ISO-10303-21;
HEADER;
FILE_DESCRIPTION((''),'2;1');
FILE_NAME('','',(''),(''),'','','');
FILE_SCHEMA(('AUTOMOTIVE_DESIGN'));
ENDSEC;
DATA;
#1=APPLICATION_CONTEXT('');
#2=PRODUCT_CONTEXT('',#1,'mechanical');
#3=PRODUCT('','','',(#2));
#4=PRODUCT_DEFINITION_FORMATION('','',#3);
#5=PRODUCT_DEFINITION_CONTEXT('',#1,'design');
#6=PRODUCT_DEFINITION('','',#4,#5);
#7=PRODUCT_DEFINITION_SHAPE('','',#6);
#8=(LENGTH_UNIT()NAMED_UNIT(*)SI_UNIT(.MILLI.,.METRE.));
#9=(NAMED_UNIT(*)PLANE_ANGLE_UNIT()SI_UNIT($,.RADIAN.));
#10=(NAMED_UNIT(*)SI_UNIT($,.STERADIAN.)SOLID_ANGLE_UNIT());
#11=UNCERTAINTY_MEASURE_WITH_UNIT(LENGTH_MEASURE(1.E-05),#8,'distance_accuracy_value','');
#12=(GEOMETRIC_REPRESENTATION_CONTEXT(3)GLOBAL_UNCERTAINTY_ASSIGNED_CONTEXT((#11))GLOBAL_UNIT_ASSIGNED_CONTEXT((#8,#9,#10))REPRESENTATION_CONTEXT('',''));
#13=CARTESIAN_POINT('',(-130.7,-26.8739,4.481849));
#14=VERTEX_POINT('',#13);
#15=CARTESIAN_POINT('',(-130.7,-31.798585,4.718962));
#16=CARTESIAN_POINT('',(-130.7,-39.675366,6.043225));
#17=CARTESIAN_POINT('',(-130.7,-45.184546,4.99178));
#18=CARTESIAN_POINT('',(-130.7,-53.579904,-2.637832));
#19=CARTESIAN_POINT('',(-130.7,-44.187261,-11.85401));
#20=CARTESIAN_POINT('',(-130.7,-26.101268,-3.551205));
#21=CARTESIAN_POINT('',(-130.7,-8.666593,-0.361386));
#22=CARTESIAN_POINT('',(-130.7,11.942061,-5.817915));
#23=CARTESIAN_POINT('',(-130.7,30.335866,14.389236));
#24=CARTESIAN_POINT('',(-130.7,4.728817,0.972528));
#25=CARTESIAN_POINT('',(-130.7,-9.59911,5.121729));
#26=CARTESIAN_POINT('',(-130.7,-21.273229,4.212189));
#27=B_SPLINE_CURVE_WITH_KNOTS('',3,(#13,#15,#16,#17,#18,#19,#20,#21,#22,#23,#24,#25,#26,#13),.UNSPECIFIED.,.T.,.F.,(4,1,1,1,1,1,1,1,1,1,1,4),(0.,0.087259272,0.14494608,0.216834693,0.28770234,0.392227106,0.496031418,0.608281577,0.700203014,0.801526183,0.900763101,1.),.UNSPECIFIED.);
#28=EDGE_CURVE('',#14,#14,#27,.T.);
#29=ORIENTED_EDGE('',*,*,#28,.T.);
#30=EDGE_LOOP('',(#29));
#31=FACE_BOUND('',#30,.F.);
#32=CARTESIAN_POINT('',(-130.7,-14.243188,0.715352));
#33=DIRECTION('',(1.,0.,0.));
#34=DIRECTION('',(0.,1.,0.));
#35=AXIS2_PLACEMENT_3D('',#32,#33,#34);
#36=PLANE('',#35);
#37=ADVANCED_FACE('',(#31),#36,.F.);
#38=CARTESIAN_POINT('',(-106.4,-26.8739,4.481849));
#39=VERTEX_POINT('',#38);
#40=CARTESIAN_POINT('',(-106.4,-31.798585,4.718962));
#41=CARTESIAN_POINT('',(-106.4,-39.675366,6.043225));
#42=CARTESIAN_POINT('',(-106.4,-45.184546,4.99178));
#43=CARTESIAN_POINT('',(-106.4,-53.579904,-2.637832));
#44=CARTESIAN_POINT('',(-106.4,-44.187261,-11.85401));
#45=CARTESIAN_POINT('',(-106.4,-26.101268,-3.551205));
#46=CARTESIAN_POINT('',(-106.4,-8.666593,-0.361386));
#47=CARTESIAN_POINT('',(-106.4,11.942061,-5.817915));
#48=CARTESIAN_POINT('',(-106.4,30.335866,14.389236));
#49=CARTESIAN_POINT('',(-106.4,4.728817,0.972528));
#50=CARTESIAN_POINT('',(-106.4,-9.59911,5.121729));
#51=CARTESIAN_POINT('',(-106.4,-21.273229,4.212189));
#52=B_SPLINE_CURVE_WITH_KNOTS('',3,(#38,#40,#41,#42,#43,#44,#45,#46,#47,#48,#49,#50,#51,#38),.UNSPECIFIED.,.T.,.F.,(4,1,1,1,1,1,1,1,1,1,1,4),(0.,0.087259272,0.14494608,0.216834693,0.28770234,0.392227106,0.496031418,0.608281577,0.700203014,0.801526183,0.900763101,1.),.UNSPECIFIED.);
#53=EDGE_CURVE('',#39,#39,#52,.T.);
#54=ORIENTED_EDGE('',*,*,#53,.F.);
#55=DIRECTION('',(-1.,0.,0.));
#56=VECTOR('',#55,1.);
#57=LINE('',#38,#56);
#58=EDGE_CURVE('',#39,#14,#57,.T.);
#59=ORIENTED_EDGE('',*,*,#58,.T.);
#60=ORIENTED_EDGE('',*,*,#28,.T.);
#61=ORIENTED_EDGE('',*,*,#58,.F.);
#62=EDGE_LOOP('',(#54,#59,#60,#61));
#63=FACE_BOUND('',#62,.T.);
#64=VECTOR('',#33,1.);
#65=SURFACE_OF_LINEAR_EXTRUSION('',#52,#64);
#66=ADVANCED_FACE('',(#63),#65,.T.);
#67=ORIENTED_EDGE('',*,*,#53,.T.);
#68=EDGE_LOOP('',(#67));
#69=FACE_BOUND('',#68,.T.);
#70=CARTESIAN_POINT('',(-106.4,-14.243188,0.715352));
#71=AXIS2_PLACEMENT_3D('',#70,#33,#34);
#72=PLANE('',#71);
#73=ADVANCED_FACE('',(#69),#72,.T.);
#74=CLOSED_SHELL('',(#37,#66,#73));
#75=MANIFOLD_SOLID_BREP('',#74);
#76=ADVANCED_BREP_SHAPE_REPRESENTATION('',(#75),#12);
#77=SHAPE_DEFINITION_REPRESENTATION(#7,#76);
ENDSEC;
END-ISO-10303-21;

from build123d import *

# Parameters (mm, degrees)
F4_DEPTH = 24.3


# Not quite as in the source:
# - the program builds the solid bodies; features that only make, move or delete a surface that nothing else refers to are left out


with BuildPart() as f4:
    # F3 (on offset) → F4 (new body)
    with BuildSketch(Plane.YZ.offset(-106.4)):
        with BuildLine():
            add(Edge.make_bspline(
                [(-26.8738996238, -33.3181507885), (-31.7985846948, -33.0810381629), (-39.6753658358, -31.7567749517), (-45.184545597, -32.808220076), (-53.5799036524, -40.4378318936), (-44.1872605114, -49.6540103639), (-26.1012684804, -41.3512050956), (-8.6665931873, -38.1613860037), (11.9420613326, -43.6179151391), (30.3358664671, -23.4107638312), (4.7288171389, -36.8274718367), (-9.5991098249, -32.6782708038), (-21.2732285966, -33.5878106335), (-26.8738996238, -33.3181507885)],
                knots=[0, 0, 0, 0, 0.0872592718, 0.1449460796, 0.216834693, 0.2877023398, 0.3922271061, 0.4960314182, 0.6082815771, 0.7002030135, 0.8015261827, 0.9007631009, 1, 1, 1, 1], degree=3))
        make_face()
    extrude(amount=-F4_DEPTH)


with BuildPart() as f4_1:
    # F5: moved
    add(f4.part.moved(Location((0, 0, 37.8))))


solid = f4_1.part
